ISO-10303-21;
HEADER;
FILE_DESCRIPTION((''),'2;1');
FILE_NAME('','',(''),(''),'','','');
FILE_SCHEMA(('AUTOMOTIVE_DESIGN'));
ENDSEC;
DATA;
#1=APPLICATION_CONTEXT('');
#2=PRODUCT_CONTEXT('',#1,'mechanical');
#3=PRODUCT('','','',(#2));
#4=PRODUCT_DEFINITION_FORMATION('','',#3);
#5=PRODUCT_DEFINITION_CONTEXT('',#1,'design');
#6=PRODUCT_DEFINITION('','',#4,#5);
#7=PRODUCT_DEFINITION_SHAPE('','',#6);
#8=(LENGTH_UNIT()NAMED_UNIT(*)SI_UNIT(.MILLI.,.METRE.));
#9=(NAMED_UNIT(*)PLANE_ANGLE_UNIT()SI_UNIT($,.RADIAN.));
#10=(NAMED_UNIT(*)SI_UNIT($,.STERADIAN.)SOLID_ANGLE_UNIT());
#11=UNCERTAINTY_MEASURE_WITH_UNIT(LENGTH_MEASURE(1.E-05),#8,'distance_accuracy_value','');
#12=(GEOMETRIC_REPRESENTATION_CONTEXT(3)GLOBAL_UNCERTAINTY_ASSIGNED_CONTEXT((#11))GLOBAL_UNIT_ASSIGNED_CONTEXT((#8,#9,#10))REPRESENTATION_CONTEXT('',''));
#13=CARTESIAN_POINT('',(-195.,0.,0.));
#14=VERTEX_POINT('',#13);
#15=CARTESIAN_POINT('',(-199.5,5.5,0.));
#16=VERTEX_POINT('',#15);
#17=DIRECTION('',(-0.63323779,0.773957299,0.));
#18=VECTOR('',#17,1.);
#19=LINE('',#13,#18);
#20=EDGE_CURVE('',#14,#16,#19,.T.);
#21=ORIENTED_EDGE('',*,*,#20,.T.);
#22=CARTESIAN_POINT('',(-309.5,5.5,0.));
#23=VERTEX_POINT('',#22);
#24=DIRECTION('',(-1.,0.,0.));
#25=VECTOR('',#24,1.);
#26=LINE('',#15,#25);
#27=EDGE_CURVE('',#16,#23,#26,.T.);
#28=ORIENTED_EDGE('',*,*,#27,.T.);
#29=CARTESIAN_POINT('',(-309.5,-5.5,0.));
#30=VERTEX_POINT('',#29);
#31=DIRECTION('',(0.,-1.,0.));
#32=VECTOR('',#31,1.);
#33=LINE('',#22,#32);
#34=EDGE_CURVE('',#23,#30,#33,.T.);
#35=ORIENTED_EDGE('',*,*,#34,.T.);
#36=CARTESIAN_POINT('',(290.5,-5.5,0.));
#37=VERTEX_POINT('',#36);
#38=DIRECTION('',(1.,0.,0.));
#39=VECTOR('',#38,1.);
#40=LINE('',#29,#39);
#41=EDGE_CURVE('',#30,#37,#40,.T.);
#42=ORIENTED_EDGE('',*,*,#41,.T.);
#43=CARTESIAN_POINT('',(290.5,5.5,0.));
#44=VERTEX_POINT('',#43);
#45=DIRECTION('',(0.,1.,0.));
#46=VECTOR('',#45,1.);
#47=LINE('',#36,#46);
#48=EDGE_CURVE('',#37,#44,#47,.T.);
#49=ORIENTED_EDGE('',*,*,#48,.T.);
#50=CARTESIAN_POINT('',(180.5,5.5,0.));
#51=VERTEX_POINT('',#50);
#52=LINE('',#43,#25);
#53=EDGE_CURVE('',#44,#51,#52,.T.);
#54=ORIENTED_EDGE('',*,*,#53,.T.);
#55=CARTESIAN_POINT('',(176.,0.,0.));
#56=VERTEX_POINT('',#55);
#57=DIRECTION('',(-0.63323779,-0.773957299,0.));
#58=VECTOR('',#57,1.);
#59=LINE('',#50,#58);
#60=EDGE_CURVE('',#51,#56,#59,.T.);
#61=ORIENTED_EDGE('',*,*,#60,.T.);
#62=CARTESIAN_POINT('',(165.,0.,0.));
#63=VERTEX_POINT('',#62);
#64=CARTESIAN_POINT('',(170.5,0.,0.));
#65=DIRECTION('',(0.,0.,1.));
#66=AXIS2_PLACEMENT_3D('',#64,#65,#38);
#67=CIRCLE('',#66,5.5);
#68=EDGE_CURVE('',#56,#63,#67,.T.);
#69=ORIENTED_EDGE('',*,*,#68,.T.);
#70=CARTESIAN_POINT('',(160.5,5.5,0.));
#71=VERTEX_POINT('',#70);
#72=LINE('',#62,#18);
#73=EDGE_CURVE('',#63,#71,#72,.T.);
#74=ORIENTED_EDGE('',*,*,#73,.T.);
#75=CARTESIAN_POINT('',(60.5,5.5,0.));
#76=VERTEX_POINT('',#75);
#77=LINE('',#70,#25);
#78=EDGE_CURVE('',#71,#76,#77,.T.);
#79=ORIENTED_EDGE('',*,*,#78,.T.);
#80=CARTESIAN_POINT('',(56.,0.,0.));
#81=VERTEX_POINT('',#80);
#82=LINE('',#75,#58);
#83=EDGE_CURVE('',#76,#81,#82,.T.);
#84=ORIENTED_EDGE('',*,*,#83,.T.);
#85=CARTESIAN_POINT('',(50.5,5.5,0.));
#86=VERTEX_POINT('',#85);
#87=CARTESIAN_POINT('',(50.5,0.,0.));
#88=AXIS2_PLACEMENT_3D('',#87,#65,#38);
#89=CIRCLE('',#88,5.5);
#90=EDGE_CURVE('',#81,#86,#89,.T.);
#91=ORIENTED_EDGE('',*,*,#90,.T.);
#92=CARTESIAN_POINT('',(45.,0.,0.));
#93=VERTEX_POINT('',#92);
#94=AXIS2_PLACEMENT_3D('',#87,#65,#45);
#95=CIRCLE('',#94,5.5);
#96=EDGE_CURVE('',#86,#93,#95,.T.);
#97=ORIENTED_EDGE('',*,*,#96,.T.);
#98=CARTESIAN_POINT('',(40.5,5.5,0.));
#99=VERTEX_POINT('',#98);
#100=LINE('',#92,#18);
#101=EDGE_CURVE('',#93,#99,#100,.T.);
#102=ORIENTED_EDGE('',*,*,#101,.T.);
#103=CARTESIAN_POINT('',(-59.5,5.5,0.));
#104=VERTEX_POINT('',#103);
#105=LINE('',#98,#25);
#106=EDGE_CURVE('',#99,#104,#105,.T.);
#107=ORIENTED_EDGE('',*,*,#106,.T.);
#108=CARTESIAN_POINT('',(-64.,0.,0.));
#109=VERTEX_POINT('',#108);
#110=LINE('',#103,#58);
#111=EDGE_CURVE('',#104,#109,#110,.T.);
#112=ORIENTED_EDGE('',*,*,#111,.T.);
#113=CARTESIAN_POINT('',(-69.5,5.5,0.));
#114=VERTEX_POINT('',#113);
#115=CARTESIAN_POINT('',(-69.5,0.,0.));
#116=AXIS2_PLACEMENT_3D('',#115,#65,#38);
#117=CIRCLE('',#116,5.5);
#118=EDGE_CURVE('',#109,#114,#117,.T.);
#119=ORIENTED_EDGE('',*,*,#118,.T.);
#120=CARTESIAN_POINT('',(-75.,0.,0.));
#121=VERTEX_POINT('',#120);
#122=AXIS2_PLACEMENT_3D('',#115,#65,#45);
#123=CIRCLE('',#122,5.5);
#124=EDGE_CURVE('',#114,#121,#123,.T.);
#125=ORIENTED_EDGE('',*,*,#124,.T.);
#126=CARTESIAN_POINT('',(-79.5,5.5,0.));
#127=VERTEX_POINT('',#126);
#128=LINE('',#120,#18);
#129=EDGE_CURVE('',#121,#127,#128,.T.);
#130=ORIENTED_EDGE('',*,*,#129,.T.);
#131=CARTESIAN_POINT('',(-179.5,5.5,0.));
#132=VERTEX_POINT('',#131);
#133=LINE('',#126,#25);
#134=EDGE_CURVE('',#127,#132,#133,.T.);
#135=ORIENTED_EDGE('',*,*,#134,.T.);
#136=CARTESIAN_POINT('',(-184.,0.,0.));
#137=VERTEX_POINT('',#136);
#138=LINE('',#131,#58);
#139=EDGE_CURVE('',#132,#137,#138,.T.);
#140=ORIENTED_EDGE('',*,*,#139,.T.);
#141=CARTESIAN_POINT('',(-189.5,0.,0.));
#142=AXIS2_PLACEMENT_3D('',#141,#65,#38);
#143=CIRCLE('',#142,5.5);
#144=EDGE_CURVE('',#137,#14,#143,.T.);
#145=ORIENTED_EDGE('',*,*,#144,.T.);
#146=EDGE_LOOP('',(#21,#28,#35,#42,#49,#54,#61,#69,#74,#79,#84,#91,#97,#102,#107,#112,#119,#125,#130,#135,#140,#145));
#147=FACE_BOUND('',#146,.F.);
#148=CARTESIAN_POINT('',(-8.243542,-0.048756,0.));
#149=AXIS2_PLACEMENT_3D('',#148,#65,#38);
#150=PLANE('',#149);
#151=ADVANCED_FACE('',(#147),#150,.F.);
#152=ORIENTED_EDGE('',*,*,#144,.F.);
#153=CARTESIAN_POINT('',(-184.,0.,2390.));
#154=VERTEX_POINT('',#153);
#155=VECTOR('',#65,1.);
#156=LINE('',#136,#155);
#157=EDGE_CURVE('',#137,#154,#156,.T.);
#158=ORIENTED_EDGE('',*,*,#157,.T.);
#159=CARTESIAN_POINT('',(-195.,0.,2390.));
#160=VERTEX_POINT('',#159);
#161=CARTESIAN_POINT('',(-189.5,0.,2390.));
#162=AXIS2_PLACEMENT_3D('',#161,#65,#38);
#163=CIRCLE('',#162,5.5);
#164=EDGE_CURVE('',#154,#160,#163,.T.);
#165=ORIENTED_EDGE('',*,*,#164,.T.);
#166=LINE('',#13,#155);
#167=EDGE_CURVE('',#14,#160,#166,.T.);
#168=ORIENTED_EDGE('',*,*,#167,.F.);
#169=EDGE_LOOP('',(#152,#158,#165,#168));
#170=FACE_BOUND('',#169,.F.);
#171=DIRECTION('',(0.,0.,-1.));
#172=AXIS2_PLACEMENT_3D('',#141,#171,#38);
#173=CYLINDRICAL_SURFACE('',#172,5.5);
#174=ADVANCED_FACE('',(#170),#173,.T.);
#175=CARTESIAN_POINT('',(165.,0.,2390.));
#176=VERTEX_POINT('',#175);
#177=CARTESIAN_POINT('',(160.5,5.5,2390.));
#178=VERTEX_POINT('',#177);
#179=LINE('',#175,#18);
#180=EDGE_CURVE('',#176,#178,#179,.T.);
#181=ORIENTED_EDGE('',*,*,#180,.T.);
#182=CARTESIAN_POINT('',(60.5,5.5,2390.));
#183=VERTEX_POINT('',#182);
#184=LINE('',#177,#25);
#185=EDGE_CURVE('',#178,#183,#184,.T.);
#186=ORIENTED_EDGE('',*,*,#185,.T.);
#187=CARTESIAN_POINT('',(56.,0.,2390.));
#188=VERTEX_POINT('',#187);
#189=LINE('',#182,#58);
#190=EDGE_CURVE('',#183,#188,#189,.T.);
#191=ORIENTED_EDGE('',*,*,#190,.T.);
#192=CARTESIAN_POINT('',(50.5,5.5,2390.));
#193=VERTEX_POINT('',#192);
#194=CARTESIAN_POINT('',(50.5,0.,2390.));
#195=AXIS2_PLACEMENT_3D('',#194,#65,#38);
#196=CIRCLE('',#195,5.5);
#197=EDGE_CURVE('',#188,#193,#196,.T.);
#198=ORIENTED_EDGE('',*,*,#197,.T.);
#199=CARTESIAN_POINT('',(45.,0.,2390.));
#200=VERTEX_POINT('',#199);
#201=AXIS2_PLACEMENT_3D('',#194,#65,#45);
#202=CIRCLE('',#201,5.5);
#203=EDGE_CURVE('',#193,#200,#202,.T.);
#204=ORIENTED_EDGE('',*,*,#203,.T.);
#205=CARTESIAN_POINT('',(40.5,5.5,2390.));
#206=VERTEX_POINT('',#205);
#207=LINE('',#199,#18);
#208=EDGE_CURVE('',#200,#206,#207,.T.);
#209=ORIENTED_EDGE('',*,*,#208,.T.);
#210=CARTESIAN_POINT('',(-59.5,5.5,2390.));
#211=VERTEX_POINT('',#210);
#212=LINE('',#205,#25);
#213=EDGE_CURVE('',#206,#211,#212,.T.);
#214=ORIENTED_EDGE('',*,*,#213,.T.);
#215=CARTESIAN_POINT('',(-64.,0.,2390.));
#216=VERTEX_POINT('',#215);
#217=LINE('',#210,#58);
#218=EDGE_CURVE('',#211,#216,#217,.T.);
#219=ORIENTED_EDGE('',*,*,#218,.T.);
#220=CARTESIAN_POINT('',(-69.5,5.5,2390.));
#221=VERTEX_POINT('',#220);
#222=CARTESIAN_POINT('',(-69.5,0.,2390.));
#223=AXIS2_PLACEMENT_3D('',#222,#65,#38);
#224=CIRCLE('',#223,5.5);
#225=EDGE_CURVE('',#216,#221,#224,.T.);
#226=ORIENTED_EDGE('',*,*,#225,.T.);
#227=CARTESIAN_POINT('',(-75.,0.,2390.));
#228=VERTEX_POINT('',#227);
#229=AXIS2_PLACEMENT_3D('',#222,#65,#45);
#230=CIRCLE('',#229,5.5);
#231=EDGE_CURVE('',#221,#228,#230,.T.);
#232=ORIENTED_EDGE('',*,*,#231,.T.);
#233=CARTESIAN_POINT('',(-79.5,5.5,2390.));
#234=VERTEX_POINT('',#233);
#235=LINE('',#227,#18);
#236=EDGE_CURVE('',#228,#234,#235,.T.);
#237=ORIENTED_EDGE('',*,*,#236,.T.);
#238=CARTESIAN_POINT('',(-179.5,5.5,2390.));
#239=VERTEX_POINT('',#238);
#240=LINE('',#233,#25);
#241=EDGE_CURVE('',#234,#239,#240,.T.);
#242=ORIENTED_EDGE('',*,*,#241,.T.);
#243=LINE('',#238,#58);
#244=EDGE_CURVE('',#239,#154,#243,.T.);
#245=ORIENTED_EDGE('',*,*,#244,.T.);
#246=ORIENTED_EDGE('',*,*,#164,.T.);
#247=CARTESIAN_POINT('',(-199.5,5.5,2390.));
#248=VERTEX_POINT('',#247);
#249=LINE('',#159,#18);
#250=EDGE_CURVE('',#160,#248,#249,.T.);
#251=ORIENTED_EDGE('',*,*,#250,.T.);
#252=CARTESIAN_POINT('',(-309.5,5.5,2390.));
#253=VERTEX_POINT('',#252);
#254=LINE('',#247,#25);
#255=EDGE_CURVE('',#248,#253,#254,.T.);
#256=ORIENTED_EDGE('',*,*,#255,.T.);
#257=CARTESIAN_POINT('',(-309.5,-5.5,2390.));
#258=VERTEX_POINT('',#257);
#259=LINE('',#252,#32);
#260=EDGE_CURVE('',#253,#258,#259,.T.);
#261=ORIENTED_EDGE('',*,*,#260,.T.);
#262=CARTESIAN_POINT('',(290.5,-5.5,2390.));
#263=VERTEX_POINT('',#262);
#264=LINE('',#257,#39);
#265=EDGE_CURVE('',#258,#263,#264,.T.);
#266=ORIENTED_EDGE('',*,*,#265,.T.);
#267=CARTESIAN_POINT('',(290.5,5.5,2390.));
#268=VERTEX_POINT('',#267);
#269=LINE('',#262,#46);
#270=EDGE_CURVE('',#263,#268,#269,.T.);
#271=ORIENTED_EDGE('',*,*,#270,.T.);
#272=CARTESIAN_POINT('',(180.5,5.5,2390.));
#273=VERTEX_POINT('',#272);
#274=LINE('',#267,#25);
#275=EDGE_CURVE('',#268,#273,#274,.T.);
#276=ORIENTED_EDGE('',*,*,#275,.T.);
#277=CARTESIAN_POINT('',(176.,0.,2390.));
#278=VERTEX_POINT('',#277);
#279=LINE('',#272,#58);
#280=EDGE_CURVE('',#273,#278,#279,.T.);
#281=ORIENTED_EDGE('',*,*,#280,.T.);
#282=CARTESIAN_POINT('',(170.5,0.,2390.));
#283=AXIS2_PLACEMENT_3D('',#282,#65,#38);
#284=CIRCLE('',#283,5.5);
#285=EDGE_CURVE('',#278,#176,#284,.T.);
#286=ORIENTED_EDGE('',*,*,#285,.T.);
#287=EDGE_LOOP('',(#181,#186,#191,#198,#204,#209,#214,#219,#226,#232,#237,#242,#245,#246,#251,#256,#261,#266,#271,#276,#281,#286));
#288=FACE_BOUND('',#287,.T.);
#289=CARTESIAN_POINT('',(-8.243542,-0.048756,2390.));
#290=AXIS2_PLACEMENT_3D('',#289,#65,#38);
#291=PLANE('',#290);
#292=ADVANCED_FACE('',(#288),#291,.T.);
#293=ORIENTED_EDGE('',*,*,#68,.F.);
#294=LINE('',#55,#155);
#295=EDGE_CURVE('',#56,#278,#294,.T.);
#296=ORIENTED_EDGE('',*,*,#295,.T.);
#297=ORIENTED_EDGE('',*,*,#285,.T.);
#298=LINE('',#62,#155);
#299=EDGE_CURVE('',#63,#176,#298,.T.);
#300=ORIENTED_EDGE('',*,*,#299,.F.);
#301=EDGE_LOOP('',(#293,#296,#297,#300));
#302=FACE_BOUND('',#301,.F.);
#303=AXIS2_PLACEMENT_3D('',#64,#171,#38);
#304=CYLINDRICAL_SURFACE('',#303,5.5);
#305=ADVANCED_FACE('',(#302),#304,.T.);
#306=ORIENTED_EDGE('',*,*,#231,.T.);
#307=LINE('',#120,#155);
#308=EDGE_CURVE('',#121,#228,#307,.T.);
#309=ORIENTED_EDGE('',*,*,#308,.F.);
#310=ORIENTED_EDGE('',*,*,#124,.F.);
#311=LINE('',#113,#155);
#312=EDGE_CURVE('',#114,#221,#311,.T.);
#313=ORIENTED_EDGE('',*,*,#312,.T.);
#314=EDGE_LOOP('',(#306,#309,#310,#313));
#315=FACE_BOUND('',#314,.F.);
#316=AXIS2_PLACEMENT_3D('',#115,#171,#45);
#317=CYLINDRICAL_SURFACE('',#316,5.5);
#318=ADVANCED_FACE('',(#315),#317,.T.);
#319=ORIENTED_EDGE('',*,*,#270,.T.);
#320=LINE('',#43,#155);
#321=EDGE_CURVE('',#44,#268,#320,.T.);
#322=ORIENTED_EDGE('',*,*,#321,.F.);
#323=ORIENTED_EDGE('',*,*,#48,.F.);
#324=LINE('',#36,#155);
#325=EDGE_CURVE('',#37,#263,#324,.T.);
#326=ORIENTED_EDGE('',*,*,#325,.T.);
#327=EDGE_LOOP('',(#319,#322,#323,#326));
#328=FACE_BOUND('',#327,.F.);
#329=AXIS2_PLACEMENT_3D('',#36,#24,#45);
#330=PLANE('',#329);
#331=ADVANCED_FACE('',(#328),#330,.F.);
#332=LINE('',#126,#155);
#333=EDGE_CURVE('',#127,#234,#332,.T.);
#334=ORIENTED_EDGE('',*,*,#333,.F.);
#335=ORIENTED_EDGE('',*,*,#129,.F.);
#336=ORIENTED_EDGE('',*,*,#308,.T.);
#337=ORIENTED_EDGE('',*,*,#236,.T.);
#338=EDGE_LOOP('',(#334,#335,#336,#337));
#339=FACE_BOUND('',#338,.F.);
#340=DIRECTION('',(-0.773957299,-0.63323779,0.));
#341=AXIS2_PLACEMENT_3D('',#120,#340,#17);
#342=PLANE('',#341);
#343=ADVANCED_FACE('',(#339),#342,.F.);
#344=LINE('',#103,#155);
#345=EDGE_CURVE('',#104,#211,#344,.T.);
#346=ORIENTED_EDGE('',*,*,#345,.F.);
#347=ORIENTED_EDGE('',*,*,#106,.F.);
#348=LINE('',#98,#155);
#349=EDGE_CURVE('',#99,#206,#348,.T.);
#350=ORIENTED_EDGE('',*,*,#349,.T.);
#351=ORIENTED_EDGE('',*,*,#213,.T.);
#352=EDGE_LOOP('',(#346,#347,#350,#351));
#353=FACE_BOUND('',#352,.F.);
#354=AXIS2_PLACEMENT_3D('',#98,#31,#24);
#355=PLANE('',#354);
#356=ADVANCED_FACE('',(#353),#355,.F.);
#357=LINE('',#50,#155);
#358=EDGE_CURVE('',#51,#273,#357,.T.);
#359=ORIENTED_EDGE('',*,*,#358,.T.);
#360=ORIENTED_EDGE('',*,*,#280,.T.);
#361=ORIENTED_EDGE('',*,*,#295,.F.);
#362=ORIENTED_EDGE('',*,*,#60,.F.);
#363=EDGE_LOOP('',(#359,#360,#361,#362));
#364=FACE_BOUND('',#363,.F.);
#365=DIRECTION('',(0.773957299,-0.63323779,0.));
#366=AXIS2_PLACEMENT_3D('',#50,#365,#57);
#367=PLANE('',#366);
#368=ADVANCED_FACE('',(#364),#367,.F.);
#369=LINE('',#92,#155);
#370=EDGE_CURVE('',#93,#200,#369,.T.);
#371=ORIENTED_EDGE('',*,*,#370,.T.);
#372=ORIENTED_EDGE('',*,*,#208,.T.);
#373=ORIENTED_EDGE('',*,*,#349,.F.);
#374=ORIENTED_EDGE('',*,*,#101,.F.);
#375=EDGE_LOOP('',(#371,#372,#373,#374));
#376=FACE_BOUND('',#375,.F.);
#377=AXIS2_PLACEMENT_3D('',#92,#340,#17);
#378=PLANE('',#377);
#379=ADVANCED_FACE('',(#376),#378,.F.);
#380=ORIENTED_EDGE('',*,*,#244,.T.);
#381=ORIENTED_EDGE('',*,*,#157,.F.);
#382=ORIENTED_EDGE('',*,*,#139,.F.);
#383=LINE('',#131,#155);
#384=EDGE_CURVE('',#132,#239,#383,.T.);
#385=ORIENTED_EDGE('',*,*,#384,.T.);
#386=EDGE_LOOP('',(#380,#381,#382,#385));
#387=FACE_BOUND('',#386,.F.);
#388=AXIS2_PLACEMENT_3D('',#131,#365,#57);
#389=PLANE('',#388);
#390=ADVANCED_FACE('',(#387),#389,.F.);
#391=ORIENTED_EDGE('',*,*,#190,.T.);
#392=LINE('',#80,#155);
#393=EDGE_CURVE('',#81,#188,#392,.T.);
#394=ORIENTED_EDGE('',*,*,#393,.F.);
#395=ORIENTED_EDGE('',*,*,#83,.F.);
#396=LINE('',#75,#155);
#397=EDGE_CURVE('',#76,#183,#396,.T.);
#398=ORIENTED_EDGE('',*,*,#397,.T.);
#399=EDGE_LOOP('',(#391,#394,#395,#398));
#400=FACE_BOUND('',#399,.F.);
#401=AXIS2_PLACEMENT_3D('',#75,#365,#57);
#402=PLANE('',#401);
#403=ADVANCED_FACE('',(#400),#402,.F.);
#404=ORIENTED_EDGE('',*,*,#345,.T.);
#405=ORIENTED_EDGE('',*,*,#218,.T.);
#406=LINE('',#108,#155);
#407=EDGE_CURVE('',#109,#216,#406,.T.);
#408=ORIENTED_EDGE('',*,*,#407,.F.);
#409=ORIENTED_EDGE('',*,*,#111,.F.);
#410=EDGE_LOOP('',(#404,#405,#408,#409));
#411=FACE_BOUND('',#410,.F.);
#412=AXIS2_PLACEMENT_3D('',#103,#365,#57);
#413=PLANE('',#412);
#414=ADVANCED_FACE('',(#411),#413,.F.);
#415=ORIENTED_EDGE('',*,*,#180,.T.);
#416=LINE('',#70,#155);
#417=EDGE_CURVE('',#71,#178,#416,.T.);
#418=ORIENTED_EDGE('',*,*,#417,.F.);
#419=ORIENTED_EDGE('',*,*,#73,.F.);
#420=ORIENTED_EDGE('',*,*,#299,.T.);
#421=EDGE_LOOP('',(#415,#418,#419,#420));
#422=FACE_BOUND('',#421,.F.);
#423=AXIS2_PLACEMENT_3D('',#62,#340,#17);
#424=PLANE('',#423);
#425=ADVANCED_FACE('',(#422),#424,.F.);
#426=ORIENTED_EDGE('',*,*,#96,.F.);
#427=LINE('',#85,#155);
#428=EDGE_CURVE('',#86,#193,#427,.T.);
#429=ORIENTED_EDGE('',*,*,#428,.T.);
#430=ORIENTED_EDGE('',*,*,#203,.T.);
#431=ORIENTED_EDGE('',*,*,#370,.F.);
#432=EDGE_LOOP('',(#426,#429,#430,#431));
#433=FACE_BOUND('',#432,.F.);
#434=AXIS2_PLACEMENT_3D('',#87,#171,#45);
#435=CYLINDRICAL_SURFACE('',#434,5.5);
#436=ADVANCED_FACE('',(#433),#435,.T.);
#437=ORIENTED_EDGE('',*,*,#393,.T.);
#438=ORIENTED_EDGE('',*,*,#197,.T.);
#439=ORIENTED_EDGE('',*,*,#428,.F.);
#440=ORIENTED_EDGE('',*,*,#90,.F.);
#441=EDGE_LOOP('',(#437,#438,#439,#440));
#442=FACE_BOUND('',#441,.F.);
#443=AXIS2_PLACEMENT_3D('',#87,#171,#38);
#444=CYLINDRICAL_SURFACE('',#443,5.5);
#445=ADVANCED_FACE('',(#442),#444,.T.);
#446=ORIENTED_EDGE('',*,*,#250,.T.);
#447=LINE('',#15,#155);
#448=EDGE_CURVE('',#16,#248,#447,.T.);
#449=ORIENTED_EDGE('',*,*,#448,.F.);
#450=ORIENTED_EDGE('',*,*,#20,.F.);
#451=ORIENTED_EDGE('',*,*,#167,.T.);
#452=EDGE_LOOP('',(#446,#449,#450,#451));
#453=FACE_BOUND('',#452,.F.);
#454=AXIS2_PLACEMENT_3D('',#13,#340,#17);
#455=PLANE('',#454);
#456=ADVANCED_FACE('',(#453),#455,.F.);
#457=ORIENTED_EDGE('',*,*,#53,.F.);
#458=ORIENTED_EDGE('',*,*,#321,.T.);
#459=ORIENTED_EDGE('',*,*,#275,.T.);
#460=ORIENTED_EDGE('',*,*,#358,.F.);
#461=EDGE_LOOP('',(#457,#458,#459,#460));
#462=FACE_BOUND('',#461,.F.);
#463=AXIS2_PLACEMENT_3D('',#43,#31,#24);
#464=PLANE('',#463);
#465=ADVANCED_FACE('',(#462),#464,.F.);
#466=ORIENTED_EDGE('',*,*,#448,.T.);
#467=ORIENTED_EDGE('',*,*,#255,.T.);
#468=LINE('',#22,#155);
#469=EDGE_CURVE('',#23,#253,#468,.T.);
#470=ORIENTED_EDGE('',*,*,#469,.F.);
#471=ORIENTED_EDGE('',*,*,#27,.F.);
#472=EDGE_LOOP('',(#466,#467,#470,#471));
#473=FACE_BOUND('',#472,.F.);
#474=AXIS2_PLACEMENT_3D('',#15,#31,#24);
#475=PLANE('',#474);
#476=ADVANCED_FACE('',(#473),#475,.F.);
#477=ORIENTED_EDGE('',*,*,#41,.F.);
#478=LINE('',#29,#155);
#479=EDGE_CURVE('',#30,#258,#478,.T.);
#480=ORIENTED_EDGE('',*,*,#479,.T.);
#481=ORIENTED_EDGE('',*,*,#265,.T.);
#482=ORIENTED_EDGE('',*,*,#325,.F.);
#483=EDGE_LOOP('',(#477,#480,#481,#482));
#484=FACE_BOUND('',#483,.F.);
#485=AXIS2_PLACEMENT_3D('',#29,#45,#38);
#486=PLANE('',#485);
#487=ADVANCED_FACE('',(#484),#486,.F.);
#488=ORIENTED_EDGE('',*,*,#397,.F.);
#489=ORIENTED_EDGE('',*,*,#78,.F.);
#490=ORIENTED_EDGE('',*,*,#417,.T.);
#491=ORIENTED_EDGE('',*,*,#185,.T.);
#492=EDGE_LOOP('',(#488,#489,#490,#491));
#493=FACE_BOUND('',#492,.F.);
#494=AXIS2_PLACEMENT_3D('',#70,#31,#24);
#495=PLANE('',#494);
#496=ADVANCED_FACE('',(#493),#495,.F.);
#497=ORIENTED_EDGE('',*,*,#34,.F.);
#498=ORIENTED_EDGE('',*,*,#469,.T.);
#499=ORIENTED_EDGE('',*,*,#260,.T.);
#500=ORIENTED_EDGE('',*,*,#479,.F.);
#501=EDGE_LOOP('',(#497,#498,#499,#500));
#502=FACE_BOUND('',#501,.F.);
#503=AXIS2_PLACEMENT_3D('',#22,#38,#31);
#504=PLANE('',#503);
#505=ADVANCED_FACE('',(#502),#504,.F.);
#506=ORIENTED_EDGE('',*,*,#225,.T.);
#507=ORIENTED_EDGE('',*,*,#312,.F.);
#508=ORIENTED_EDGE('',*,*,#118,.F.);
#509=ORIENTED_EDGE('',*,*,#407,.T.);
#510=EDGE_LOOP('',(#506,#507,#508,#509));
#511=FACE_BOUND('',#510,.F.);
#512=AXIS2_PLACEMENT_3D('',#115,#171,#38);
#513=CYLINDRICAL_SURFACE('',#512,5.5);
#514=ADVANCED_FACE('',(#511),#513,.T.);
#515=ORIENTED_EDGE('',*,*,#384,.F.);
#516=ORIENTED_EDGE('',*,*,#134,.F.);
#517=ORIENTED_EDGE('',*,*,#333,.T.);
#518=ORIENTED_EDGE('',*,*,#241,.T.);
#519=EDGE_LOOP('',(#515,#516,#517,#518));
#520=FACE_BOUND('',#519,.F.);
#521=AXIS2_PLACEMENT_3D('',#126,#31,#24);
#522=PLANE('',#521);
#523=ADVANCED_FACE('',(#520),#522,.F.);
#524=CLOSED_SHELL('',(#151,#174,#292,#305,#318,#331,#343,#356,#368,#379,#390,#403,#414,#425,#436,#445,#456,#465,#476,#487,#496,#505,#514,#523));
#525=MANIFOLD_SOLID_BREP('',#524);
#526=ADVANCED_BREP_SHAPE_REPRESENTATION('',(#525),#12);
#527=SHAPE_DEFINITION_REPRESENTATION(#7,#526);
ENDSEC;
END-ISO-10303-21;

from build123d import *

# Parameters (mm, degrees)
F1_DEPTH = 2390


# Not quite as in the source:
# - a feature names something its author has since deleted; it is built from what else it names


with BuildPart() as f1:
    # F0 (on Top) → F1 (new body)
    with BuildSketch(Plane.XY):
        with BuildLine():
            Line((-309.5, -5.5), (290.5, -5.5))
            ThreePointArc((290.5, -5.5), (285, 0), (290.5, 5.5))
            Line((290.5, 5.5), (180.5, 5.5))
            Line((180.5, 5.5), (176, 0))
            ThreePointArc((176, 0), (170.5, 5.5), (165, 0))
            Line((165, 0), (160.5, 5.5))
            Line((160.5, 5.5), (60.5, 5.5))
            Line((60.5, 5.5), (56, 0))
            ThreePointArc((56, 0), (54.3890872965, 3.8890872965), (50.5, 5.5))
            ThreePointArc((50.5, 5.5), (46.6109127035, 3.8890872965), (45, 0))
            Line((45, 0), (40.5, 5.5))
            Line((40.5, 5.5), (-59.5, 5.5))
            Line((-59.5, 5.5), (-64, 0))
            ThreePointArc((-64, 0), (-65.6109127035, 3.8890872965), (-69.5, 5.5))
            ThreePointArc((-69.5, 5.5), (-73.3890872965, 3.8890872965), (-75, 0))
            Line((-75, 0), (-79.5, 5.5))
            Line((-79.5, 5.5), (-179.5, 5.5))
            Line((-179.5, 5.5), (-184, 0))
            ThreePointArc((-184, 0), (-189.5, 5.5), (-195, 0))
            Line((-195, 0), (-199.5, 5.5))
            Line((-199.5, 5.5), (-309.5, 5.5))
            Line((-309.5, 5.5), (-309.5, -5.5))
        make_face()
        with BuildLine():
            ThreePointArc((290.5, 5.5), (285, 0), (290.5, -5.5))
            Line((290.5, -5.5), (290.5, 5.5))
        make_face()
    extrude(amount=F1_DEPTH)


solid = f1.part
